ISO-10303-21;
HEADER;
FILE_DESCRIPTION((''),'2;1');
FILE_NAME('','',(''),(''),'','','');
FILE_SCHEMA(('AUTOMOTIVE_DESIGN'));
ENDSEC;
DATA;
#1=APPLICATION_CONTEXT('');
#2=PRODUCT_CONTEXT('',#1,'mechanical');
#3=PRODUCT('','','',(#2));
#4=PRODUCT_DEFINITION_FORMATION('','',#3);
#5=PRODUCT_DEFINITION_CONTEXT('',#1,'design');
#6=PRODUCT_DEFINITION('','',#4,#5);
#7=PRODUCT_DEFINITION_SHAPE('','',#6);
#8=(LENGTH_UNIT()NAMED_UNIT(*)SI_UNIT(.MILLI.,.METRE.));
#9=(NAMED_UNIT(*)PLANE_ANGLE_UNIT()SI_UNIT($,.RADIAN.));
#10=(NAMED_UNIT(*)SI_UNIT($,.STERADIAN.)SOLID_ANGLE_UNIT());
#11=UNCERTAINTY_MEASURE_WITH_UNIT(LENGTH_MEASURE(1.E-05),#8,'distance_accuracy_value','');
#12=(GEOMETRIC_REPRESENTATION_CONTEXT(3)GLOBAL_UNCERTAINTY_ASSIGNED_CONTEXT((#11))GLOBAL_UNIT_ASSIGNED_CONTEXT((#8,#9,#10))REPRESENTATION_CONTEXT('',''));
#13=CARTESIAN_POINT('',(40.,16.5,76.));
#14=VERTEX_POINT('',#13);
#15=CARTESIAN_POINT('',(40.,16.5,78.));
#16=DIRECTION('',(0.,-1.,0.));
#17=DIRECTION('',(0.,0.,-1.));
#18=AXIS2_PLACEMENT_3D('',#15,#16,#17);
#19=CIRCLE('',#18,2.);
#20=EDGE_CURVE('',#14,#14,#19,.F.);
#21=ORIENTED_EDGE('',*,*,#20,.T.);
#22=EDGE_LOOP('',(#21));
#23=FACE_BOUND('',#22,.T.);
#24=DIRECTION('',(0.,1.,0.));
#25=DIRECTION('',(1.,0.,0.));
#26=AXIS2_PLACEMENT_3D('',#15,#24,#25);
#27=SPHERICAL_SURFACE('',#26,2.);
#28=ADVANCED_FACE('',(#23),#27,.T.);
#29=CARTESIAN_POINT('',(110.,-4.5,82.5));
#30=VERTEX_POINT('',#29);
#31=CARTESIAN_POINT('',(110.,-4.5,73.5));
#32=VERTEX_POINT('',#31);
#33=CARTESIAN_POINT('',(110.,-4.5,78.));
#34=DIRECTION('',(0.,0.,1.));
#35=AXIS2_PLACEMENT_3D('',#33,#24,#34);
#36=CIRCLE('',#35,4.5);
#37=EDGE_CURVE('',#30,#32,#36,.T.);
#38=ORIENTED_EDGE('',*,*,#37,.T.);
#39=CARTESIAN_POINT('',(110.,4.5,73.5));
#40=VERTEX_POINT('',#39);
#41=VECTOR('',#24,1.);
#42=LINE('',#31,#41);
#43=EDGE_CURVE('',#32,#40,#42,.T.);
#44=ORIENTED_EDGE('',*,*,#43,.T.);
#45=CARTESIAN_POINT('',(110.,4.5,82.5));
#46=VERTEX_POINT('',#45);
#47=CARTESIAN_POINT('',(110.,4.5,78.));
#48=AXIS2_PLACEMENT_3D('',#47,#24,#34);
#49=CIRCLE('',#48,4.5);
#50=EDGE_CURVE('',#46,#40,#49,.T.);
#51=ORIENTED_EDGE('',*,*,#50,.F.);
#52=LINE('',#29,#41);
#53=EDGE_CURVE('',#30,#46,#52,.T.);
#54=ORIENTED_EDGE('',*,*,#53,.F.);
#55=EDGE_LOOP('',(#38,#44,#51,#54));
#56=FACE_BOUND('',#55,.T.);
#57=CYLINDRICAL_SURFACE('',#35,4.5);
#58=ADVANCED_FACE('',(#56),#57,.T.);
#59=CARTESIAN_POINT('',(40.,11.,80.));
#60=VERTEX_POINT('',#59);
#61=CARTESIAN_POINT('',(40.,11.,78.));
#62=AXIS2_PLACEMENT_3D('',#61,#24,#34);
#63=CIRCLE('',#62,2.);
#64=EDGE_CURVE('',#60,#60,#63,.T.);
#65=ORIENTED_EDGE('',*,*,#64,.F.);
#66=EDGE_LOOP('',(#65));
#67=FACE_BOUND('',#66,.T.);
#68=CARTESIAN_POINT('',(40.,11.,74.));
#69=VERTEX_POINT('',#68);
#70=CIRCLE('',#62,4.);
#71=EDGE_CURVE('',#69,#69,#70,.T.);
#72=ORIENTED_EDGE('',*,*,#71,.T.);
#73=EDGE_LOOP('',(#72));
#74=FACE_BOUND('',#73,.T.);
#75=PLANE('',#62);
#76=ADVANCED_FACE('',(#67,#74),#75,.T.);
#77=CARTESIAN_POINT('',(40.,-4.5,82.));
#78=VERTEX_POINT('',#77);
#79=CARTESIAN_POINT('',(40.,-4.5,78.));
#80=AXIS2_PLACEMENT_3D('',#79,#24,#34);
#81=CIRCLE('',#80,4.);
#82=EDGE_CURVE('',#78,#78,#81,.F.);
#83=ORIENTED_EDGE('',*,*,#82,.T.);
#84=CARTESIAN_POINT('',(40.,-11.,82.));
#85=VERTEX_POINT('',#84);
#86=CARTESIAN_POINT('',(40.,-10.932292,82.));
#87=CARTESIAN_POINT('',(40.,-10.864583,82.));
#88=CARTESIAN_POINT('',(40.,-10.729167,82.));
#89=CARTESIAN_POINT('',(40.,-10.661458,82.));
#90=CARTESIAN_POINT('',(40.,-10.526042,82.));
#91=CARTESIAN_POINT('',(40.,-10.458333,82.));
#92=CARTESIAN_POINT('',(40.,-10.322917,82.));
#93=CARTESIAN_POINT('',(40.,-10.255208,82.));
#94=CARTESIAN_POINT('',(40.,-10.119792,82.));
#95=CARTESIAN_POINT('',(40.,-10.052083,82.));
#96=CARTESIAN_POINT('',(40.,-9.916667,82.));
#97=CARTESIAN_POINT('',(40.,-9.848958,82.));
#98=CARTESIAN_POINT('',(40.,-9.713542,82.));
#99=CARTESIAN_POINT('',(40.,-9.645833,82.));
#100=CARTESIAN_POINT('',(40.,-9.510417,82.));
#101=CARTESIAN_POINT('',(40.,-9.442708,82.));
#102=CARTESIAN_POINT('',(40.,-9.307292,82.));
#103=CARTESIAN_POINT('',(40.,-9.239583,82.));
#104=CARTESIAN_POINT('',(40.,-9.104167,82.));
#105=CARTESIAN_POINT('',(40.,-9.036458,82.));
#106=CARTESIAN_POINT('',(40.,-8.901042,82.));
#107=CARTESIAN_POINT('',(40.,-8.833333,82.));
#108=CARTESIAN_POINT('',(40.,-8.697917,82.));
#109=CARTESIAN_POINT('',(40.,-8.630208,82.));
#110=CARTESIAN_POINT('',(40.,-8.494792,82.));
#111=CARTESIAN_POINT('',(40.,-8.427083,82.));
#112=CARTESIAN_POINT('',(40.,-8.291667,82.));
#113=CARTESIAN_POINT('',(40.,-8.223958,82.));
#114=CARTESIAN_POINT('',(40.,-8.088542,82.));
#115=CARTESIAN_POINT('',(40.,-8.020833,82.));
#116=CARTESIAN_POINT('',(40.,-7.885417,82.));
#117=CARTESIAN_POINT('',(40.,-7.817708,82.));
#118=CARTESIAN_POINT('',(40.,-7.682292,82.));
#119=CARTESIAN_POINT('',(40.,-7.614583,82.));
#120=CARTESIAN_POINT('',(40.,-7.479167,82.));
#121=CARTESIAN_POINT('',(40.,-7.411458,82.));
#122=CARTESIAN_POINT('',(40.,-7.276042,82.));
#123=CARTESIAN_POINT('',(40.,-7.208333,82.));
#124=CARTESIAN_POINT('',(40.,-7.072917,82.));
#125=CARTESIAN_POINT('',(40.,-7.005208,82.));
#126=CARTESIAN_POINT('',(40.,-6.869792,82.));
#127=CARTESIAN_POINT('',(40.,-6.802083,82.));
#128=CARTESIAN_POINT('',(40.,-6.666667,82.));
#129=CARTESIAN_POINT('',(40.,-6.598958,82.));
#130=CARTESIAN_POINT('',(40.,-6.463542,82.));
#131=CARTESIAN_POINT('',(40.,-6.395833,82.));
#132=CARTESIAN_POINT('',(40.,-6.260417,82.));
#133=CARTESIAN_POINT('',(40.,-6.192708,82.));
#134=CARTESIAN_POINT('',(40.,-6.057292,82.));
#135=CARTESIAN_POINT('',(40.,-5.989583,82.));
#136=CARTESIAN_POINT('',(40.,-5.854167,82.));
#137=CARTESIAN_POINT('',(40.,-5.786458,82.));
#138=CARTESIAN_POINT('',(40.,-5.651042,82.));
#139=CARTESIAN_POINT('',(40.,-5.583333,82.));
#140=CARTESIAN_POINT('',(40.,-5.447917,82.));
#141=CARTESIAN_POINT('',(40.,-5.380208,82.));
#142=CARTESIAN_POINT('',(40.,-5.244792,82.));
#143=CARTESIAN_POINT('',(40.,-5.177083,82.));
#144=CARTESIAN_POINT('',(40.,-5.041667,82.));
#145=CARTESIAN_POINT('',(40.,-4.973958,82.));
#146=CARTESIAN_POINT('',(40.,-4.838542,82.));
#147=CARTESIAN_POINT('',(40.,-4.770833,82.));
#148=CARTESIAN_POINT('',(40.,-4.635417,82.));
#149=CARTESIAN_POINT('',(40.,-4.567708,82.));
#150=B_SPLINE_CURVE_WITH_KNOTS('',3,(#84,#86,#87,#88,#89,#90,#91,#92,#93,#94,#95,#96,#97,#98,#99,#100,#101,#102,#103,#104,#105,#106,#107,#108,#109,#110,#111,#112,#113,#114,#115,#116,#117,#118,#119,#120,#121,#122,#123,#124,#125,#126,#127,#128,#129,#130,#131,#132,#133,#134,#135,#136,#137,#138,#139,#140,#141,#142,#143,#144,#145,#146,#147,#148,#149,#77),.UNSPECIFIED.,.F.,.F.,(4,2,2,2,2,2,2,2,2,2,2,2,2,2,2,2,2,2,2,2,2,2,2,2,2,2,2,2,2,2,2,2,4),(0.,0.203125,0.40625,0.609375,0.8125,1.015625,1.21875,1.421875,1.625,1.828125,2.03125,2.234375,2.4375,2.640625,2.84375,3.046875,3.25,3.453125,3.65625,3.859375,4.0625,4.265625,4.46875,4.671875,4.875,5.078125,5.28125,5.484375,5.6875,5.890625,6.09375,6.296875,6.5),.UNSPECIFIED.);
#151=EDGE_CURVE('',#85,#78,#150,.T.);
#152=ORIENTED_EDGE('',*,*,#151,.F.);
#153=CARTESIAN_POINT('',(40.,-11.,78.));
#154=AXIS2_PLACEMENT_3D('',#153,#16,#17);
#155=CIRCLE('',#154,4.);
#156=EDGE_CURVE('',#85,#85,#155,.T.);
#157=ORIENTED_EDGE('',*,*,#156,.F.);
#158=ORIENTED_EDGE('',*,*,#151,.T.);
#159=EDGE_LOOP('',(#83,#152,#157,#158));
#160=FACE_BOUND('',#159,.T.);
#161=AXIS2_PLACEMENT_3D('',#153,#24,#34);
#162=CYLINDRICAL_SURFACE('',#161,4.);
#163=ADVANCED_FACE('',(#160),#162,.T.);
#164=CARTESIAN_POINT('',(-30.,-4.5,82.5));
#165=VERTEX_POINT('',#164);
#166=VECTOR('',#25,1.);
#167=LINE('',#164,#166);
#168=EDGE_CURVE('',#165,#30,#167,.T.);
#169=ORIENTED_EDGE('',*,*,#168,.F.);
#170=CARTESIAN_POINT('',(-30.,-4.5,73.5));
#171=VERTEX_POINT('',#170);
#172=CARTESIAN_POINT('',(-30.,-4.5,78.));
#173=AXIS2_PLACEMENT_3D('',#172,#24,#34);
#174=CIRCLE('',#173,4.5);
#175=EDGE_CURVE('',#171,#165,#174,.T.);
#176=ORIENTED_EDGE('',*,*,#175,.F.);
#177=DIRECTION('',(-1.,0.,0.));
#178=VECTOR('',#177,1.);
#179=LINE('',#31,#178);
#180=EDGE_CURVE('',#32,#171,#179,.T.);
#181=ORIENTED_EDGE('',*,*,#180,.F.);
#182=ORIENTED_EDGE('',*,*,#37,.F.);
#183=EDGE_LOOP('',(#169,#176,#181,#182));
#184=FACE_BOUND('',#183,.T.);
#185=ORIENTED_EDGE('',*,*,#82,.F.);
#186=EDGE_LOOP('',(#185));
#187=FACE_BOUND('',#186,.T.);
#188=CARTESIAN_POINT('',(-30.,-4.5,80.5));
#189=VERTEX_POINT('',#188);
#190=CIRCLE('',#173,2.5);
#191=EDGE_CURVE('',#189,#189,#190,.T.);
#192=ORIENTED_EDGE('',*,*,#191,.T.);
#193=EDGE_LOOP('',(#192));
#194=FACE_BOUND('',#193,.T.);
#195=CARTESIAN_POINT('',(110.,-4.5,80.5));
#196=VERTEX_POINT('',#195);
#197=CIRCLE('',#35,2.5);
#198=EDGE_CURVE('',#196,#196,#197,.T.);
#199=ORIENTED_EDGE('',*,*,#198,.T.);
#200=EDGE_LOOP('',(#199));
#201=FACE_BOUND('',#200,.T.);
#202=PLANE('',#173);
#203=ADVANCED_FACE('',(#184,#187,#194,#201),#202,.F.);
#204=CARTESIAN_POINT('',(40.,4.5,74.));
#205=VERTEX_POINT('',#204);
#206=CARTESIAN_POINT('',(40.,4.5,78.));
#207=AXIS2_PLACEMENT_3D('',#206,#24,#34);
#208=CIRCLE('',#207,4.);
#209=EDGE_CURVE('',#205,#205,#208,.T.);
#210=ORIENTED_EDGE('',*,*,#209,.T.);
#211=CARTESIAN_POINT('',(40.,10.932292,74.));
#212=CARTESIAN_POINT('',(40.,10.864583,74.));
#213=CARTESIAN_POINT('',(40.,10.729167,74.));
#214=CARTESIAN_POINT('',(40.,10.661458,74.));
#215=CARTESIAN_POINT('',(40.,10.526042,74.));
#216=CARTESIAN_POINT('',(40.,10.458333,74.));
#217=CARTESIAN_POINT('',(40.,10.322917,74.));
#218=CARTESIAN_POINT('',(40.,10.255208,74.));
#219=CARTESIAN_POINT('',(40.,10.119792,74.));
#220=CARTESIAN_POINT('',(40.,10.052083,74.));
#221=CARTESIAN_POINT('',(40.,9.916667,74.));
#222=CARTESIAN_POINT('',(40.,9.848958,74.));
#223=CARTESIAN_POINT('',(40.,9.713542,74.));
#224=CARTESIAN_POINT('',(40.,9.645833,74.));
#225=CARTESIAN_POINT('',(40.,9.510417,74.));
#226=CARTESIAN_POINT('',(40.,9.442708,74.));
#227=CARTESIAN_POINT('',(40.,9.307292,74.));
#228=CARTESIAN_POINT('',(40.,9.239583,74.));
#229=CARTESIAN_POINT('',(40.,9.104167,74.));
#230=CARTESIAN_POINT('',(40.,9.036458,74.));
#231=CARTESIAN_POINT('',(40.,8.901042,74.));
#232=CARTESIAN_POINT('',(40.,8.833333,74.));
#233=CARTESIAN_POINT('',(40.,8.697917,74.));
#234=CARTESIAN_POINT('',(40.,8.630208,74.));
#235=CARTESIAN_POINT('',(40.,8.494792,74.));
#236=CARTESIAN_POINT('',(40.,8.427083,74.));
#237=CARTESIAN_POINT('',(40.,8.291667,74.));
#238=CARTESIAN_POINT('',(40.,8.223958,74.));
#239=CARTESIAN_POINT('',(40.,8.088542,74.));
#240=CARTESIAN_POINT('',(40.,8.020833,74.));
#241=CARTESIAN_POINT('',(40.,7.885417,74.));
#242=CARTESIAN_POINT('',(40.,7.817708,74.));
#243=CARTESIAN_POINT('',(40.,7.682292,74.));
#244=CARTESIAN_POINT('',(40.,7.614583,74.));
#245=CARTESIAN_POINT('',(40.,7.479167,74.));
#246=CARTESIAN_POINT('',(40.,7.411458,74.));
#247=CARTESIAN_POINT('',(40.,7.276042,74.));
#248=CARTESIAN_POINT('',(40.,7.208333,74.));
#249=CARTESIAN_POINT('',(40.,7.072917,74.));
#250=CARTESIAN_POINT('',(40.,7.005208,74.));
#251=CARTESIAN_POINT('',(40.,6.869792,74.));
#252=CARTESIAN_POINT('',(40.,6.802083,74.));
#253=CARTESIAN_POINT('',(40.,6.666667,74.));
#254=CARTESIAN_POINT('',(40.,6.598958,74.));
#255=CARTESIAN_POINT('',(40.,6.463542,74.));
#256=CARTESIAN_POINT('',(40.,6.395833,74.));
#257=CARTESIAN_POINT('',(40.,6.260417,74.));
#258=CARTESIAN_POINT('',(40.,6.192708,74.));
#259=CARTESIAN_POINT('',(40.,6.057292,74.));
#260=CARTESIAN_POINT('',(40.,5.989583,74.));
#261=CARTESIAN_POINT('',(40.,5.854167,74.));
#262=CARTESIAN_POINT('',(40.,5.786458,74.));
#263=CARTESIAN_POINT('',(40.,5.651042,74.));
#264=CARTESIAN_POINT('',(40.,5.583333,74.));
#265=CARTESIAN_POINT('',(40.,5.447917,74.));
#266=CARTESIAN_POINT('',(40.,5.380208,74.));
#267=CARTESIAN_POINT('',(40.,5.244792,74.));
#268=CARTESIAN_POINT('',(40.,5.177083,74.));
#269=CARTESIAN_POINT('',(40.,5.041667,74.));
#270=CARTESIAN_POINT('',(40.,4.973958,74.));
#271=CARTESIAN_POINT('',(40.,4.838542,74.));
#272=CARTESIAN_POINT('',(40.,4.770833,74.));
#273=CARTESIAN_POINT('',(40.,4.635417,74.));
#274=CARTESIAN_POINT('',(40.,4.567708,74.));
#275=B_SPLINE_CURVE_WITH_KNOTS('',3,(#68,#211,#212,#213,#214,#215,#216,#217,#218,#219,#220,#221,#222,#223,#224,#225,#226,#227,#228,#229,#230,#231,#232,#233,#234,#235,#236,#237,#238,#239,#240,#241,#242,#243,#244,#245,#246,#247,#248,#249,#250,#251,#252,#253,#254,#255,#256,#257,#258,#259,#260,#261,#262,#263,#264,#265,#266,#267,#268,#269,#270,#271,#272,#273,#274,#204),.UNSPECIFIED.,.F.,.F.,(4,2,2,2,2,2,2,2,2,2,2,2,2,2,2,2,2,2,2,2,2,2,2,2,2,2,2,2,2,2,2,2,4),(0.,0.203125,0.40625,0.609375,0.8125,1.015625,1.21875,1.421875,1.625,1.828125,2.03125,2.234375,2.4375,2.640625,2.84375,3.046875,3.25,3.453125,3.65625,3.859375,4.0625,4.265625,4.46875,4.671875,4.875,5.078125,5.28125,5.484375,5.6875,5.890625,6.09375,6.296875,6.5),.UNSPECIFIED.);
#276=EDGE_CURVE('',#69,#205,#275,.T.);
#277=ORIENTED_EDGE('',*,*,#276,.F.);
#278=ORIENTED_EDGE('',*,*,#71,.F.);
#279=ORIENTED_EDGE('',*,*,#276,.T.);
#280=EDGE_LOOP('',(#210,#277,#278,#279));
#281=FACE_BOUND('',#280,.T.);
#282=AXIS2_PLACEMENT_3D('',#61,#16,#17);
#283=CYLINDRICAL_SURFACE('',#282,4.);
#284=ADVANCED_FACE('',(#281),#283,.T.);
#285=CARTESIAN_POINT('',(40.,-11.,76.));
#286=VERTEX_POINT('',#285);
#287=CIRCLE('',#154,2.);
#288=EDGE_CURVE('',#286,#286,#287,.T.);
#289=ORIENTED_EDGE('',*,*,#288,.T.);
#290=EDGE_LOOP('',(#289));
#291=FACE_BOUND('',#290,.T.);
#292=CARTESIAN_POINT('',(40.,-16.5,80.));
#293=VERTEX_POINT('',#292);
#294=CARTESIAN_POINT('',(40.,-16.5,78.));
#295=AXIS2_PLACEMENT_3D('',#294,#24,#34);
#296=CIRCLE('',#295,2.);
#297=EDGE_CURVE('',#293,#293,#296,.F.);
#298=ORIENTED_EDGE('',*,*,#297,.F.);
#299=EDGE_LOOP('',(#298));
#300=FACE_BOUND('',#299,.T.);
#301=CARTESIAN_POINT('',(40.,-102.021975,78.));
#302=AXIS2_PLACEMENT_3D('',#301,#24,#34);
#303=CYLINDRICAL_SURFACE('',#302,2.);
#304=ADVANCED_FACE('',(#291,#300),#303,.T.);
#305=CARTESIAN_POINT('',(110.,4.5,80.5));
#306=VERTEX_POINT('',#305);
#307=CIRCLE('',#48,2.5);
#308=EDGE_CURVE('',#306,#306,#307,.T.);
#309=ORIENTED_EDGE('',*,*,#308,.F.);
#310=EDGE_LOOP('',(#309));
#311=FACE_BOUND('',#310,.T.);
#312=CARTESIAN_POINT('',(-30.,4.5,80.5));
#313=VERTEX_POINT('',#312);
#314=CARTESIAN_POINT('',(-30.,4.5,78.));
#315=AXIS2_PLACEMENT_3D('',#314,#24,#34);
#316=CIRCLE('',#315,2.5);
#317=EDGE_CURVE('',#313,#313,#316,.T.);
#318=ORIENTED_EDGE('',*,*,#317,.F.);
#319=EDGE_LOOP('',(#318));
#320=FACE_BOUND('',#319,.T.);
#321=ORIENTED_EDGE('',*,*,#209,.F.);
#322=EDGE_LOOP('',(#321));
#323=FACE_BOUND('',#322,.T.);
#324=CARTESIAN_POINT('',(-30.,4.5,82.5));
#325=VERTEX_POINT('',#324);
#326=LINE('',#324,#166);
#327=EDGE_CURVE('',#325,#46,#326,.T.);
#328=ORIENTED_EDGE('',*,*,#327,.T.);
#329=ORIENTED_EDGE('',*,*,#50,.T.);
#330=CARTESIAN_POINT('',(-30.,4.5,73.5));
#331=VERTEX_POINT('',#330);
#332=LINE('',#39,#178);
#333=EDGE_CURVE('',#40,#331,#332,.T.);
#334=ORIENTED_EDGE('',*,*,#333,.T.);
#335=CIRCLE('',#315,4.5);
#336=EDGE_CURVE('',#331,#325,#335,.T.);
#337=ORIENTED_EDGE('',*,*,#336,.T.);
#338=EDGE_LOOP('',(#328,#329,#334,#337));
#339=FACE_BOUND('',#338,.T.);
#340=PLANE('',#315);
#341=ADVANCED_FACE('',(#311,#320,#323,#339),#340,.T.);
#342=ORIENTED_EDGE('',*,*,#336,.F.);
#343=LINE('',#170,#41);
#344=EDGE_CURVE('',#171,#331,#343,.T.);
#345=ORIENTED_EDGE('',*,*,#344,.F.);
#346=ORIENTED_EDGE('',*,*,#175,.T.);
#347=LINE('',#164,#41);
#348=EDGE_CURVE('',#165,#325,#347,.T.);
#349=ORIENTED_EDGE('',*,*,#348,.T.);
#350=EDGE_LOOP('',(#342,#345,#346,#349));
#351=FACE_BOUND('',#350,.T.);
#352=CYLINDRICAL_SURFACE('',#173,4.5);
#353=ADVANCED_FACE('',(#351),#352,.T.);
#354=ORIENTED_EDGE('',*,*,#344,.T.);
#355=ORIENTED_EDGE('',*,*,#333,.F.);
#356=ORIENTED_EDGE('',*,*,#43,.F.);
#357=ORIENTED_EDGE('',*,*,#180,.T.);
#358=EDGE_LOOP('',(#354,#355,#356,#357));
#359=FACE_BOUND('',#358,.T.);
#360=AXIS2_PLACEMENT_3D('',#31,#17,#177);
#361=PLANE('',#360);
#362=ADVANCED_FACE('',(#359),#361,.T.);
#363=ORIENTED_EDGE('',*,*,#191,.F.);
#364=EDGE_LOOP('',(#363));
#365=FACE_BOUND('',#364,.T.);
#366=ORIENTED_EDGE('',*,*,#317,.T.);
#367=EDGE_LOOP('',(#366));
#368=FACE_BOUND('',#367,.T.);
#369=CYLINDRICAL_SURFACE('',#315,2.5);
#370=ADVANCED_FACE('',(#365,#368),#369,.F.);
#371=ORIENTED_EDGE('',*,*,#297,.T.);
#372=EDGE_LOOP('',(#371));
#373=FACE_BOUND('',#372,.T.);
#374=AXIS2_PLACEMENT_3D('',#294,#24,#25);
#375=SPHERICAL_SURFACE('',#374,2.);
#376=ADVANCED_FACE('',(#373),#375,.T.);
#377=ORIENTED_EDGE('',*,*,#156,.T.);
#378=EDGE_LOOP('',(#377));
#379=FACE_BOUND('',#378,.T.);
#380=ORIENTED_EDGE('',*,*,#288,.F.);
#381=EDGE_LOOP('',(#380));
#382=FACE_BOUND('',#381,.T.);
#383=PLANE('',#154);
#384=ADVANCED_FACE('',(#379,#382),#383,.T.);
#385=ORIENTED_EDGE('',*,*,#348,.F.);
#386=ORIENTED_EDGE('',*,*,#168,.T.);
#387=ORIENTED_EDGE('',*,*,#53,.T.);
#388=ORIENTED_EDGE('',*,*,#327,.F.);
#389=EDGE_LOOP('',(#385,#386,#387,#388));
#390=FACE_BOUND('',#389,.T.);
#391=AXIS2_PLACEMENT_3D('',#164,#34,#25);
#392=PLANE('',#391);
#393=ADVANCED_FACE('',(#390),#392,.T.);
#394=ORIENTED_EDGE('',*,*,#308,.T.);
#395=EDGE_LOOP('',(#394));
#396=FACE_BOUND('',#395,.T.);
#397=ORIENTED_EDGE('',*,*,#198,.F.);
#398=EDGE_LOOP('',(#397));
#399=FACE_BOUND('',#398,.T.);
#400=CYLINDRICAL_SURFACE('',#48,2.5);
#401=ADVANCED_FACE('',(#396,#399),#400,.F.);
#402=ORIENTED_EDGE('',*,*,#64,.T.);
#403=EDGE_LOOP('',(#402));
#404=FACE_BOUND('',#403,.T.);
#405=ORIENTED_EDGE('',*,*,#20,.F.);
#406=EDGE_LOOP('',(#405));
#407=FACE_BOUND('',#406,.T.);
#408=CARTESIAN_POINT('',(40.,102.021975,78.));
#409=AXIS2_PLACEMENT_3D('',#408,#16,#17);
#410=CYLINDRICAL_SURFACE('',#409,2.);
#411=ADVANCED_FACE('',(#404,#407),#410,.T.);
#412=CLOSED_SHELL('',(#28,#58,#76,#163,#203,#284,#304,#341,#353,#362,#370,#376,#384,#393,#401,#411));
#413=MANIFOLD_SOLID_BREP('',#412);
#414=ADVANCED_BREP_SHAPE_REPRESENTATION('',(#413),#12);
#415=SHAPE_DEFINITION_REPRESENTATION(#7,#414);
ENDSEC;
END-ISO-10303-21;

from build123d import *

# Parameters (mm, degrees)
BOSS_EXTRUDE1_DEPTH          = 9
SKETCH2_R                    = 4
BOSS_EXTRUDE2_DEPTH          = 6.5
BOSS_EXTRUDE4_START          = 6.5
SKETCH4_R                    = 4
BOSS_EXTRUDE4_DEPTH          = 6.5
F_5_0_5_DIAMETER_HOLE1_D     = 5
F_5_0_5_DIAMETER_HOLE1_DEPTH = 23


# Read off the part's stored shape, not the designer's step: Boss-Extrude3, Boss-Extrude5
with BuildPart() as part:
    # Sketch1 → Boss-Extrude1 (new body)
    with BuildSketch(Plane(origin=(0, 4.5, 0), x_dir=(1, 0, 0), z_dir=(0, 1, 0))):
        with BuildLine():
            Line((-30, -82.5), (110, -82.5))
            ThreePointArc((110, -82.5), (114.5, -78), (110, -73.5))
            Line((110, -73.5), (-30, -73.5))
            ThreePointArc((-30, -73.5), (-34.5, -78), (-30, -82.5))
        make_face()
    extrude(amount=-BOSS_EXTRUDE1_DEPTH)

    # Sketch2 → Boss-Extrude2 (add)
    with BuildSketch(Plane(origin=(0, 4.5, 0), x_dir=(-1, 0, 0), z_dir=(0, 1, 0))):
        with Locations(Location((-40, 78, 0), (0, 0, 270))):
            Circle(SKETCH2_R)
    extrude(amount=BOSS_EXTRUDE2_DEPTH)

    # Boss-Extrude3 outline → Boss-Extrude3 (revolve)
    with BuildSketch(Plane(origin=(40, 0, 78), x_dir=(1, 0, 0), z_dir=(0, 0, 1))):
        with BuildLine():
            Line((2, 11), (2, 16.499999998))
            ThreePointArc((2, 16.499999998), (1.414213563, 17.914213562), (0, 18.5))
            Line((0, 18.5), (0, 11))
            Line((0, 11), (2, 11))
        make_face()
    revolve(axis=Axis((40, 0, 78), (0, 1, 0)))

    # Sketch4 → Boss-Extrude4 (add)
    with BuildSketch(Plane.XZ.offset(4.5).offset(BOSS_EXTRUDE4_START)):
        with Locations(Location((40, 78, 0), (0, 0, 270))):
            Circle(SKETCH4_R)
    extrude(amount=-BOSS_EXTRUDE4_DEPTH)

    # Boss-Extrude5 outline → Boss-Extrude5 (revolve)
    with BuildSketch(Plane(origin=(40, 0, 78), x_dir=(1, 0, 0), z_dir=(0, 0, 1))):
        with BuildLine():
            ThreePointArc((0, -18.5), (1.414213563, -17.914213562), (2, -16.499999998))
            Line((2, -16.499999998), (2, -11))
            Line((2, -11), (0, -11))
            Line((0, -11), (0, -18.5))
        make_face()
    revolve(axis=Axis((40, 0, 78), (0, 1, 0)))

    # Ø5.0 (5) Diameter Hole1
    with Locations(Plane(origin=(0, 4.5, 0), x_dir=(1, 0, 0), z_dir=(0, 1, 0))):
        with Locations((-30, -78), (110, -78)):
            Hole(F_5_0_5_DIAMETER_HOLE1_D / 2, depth=F_5_0_5_DIAMETER_HOLE1_DEPTH)


solid = part.part
